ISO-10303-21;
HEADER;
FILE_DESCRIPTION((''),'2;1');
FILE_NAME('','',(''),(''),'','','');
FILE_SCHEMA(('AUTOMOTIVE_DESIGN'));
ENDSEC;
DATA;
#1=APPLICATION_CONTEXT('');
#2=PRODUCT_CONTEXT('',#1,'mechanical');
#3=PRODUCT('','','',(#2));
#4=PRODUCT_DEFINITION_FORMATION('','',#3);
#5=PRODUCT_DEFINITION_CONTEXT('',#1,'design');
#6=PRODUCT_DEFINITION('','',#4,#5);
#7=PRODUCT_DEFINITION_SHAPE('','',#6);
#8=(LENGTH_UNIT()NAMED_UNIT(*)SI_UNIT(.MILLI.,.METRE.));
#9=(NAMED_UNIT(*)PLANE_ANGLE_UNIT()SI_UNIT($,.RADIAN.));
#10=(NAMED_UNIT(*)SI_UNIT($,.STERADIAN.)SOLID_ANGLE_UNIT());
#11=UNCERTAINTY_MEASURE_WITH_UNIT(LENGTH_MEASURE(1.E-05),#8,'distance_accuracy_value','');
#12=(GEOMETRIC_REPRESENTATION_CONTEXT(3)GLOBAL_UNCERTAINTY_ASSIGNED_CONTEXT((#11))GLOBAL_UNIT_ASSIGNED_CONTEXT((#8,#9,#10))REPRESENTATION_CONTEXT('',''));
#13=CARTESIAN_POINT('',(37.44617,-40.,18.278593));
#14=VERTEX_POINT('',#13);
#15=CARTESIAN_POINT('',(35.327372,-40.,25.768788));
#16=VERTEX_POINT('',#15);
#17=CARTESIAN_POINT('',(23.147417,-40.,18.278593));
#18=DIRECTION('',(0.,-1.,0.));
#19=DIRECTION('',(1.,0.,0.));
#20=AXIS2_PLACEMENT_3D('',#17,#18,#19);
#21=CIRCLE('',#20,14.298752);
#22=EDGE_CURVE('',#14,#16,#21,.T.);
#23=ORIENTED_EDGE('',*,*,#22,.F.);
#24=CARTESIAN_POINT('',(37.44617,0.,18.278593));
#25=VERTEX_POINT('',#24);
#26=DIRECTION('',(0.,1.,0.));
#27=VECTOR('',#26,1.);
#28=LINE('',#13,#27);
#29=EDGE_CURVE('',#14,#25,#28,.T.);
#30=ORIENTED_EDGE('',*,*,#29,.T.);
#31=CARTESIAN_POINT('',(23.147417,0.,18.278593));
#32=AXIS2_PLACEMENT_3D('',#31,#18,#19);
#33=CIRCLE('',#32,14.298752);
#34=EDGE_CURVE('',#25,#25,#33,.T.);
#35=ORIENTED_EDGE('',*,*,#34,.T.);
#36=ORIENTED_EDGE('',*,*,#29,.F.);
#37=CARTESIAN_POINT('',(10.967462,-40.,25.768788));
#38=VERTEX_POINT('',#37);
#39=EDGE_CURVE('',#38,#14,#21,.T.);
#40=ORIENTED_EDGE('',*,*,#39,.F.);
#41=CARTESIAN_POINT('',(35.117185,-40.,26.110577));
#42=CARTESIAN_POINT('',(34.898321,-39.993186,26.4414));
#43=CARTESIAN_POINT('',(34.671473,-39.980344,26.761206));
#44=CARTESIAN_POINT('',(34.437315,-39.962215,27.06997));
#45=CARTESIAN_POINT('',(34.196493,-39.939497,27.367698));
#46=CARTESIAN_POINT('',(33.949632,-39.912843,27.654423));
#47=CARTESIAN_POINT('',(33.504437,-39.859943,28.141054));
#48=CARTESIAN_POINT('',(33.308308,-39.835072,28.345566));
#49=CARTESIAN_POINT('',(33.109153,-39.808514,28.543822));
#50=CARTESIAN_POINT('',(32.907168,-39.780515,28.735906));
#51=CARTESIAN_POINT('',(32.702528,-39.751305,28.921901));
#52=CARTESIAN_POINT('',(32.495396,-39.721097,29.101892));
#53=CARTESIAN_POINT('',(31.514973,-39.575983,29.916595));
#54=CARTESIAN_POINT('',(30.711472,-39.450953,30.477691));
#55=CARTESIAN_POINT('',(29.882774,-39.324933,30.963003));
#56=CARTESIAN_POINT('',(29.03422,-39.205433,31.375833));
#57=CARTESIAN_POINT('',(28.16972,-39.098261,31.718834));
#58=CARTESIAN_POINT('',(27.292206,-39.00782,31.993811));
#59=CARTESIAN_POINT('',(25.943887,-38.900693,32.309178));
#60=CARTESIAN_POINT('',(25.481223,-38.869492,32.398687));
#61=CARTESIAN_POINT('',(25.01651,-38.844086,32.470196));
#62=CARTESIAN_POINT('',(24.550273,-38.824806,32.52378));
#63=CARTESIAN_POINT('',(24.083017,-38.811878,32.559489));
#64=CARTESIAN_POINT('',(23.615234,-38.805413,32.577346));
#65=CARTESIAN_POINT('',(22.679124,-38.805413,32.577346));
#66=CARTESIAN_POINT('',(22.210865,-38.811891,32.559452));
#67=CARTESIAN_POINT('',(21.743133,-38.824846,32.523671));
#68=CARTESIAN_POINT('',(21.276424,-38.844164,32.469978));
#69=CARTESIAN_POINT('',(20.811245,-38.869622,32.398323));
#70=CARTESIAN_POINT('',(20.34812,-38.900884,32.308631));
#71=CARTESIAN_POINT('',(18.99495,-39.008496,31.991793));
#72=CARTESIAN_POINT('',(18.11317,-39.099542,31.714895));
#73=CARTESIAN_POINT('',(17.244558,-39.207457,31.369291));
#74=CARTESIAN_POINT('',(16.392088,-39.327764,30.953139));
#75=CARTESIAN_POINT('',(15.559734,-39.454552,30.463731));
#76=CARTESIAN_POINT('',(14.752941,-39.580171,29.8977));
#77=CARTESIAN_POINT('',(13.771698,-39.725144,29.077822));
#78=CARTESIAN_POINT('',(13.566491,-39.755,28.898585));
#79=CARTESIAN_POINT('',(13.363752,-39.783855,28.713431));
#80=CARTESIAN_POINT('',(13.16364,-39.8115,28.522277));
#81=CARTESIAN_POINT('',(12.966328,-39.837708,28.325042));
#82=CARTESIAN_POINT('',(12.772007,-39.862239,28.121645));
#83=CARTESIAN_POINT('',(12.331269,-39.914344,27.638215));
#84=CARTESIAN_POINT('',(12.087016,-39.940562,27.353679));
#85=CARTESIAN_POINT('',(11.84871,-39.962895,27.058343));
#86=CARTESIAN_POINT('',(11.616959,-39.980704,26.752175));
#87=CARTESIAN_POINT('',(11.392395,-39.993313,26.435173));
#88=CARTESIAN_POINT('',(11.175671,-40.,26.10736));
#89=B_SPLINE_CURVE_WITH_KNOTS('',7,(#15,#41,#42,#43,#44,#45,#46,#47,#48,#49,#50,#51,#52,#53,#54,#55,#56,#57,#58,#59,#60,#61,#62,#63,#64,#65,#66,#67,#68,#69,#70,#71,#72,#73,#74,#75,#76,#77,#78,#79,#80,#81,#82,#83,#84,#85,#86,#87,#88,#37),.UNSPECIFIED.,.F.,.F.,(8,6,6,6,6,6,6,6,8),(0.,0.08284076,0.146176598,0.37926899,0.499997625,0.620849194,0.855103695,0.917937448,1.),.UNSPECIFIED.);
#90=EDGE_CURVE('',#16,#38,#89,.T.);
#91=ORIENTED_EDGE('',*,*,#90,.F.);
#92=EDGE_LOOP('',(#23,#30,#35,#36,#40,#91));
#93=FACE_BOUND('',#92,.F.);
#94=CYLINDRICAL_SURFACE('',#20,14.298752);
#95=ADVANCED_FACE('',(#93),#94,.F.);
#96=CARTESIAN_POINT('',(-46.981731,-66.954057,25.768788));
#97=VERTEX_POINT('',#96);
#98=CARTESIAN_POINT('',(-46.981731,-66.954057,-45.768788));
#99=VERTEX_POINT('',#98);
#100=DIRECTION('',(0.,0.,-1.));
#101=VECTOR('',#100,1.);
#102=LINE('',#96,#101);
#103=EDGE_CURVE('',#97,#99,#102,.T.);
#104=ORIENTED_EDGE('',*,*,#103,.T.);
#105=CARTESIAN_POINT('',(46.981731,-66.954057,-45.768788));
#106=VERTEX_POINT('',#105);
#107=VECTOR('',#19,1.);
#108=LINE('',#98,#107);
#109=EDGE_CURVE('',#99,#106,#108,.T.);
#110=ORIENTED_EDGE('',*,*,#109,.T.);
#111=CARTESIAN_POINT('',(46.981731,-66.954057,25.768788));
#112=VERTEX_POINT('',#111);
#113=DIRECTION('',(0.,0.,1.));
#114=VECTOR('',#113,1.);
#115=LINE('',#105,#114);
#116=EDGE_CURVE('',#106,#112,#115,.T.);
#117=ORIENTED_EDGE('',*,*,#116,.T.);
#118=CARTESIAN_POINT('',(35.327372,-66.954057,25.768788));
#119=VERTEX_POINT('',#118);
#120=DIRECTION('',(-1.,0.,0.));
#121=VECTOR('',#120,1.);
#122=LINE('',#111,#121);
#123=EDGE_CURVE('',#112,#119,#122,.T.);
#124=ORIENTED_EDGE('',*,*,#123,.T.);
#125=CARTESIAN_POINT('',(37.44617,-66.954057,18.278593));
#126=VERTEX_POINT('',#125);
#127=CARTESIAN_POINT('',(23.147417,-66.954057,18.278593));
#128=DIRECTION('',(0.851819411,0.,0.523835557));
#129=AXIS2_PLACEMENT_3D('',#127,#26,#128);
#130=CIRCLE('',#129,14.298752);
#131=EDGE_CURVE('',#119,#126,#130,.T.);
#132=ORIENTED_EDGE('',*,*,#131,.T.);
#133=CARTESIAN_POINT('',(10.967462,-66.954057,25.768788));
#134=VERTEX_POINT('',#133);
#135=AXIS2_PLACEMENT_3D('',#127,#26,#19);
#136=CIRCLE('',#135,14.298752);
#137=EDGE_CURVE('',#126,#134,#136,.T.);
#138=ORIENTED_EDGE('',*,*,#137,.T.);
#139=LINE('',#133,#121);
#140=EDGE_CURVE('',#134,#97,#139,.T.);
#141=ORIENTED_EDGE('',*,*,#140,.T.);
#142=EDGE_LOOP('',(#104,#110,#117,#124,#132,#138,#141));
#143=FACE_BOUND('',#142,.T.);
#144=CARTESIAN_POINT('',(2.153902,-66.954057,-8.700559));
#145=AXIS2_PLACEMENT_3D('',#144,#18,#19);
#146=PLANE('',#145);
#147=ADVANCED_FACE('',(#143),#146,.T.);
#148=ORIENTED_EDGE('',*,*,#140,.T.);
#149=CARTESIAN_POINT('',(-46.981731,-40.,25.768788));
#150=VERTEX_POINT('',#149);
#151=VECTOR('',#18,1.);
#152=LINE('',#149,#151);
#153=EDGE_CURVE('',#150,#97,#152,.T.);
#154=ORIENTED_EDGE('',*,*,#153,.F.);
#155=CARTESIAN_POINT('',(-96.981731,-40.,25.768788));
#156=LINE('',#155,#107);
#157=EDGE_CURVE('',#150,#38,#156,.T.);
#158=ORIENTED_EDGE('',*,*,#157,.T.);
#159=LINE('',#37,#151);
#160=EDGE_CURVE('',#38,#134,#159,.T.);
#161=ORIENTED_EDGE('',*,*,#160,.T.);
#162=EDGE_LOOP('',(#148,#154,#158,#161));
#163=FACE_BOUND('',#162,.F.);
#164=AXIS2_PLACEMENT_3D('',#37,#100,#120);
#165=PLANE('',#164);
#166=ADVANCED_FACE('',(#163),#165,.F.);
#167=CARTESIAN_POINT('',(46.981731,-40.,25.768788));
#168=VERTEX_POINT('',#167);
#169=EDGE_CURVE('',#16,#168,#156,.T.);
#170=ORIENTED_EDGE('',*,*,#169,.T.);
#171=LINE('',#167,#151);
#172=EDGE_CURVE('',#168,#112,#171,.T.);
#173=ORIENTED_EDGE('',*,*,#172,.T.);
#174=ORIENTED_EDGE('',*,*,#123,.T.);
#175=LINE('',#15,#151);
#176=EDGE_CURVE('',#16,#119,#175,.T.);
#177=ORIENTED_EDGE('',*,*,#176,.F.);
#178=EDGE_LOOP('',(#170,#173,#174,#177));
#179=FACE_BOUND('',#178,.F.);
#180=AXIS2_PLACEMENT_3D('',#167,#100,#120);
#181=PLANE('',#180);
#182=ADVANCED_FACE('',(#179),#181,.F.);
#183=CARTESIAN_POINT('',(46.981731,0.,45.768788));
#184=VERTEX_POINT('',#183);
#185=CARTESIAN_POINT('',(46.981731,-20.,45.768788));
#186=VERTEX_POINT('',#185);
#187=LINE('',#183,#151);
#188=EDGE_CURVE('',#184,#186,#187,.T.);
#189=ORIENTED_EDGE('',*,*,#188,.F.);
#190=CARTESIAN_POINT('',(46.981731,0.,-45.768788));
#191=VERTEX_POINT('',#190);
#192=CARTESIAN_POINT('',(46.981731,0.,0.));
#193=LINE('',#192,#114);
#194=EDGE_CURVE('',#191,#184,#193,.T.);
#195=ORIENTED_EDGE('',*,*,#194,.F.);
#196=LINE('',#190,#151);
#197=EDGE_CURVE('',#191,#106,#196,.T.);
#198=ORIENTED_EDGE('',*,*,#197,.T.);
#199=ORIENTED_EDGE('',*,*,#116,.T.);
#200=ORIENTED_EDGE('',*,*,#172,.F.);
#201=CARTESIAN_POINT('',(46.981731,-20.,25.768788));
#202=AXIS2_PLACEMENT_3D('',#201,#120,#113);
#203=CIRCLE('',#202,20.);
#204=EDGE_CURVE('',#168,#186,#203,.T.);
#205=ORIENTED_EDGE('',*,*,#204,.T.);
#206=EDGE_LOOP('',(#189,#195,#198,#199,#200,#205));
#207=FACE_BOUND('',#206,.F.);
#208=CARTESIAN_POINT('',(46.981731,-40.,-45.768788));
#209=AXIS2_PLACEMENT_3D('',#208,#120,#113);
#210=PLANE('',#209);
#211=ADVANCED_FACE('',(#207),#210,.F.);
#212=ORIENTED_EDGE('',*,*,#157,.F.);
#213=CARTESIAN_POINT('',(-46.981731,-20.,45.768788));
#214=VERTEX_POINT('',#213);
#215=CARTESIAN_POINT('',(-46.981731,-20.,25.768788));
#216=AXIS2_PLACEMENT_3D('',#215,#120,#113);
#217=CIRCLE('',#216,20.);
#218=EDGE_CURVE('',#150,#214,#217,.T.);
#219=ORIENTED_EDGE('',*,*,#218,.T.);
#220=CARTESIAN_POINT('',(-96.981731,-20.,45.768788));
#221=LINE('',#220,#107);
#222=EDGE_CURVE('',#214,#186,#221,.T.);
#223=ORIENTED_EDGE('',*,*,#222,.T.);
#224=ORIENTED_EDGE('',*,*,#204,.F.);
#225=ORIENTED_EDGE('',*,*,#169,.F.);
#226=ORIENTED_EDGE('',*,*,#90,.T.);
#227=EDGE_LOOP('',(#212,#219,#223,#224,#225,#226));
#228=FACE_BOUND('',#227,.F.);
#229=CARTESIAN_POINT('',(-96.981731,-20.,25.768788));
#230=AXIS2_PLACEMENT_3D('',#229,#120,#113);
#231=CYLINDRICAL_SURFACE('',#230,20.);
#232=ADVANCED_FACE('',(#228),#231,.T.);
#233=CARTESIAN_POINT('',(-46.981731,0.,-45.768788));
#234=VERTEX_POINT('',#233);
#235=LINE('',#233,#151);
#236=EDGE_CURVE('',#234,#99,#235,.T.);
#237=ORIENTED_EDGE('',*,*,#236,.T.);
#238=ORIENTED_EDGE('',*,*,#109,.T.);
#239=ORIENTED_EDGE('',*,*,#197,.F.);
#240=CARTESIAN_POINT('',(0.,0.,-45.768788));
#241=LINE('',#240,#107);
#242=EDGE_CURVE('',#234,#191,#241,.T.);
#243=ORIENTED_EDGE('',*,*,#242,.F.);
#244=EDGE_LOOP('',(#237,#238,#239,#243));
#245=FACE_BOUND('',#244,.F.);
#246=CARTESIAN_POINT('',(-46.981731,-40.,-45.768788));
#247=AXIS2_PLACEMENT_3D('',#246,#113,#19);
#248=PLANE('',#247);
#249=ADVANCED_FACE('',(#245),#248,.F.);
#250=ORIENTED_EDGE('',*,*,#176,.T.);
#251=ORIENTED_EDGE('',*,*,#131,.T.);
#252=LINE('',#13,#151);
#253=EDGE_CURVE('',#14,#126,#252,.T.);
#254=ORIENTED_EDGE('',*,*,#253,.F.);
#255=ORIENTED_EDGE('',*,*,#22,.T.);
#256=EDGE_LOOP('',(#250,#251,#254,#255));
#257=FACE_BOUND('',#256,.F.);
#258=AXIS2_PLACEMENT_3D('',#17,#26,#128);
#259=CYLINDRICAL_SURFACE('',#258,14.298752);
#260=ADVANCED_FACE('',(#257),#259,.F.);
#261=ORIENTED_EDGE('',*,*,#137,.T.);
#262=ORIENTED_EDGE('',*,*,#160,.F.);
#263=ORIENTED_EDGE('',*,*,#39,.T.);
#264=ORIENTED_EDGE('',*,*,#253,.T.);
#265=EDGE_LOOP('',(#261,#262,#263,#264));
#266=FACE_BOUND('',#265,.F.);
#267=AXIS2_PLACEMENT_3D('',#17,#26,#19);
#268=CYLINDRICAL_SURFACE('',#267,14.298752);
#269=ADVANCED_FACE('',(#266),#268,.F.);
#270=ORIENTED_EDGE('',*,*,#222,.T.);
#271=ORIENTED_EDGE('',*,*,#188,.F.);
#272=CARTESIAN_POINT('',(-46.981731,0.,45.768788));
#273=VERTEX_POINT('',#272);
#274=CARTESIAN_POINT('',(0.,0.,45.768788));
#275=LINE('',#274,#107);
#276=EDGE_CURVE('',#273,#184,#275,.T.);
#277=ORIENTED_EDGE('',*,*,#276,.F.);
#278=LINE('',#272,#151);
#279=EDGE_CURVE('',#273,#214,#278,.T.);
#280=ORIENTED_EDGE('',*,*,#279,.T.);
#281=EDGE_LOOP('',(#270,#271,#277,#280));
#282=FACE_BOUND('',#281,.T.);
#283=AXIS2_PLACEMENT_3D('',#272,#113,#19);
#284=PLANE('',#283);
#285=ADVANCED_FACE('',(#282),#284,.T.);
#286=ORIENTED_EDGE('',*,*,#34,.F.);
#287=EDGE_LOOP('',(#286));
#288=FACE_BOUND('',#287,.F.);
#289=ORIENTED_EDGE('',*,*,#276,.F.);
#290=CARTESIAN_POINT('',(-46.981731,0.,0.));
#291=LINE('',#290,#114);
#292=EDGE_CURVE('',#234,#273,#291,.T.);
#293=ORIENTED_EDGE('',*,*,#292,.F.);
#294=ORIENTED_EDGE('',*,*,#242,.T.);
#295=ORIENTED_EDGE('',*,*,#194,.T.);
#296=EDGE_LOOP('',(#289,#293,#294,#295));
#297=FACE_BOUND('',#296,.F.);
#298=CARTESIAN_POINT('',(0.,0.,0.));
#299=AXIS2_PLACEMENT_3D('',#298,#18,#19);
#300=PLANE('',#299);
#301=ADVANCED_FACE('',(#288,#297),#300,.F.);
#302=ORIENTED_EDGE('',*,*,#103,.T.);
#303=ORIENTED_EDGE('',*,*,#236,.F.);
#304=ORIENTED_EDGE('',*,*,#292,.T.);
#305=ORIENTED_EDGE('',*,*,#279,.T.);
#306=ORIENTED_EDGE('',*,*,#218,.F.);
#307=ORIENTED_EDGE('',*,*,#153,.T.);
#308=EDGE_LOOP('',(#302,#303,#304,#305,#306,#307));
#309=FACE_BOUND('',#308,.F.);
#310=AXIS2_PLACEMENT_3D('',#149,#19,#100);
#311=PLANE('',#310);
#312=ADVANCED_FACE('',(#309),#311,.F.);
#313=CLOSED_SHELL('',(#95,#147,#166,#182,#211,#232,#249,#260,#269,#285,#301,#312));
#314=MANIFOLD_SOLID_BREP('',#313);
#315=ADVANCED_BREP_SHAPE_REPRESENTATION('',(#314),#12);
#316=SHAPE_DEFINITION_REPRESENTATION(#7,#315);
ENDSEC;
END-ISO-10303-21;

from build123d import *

# Parameters (mm, degrees)
F0_W        = 93.9634628594
F0_H        = 91.5375761688
F1_DEPTH    = 40
F2_R        = 14.2987523314
F3_DEPTH    = 64.5675584674
F4_T1_DEPTH = 193.9634628594
F6_DEPTH    = 26.9540566951


# Not quite as in the source:
# - a fillet or chamfer that OpenCascade refuses, or shapes differently, is made with other operations: its cross-section is extruded or revolved along the edge and cut away or added


with BuildPart() as f1:
    # F0 (on Front) → F1 (new body)
    with BuildSketch(Plane.XZ):
        Rectangle(F0_W, F0_H)
    extrude(amount=F1_DEPTH)

    # F2 (on face) → F3 (cut)
    with BuildSketch(Plane.XZ.offset(40)):
        with Locations((23.1474172324, 18.2785931975)):
            Circle(F2_R)
    extrude(amount=-F3_DEPTH, mode=Mode.SUBTRACT)

    # F4: fillet of radius 20 on 1 edges, made by hand

    # F4_s2 → F4_t1 (cut)
    with BuildSketch(Plane.YZ.offset(-96.9817314297)):
        with BuildLine():
            ThreePointArc((-20, 45.7687880844), (-34.1421356237, 39.9109237081), (-40, 25.7687880844))
            Line((-40, 25.7687880844), (-40, 45.7687880844))
            Line((-40, 45.7687880844), (-20, 45.7687880844))
        make_face()
    extrude(amount=F4_T1_DEPTH, mode=Mode.SUBTRACT)

    # F5 (on face) → F6 (join)
    with BuildSketch(Plane.XZ.offset(40)):
        with BuildLine():
            Line((-46.9817314297, 25.7687880844), (-46.9817314297, -45.7687880844))
            Line((-46.9817314297, -45.7687880844), (46.9817314297, -45.7687880844))
            Line((46.9817314297, -45.7687880844), (46.9817314297, 25.7687880844))
            Line((46.9817314297, 25.7687880844), (35.3273720267, 25.7687880844))
            ThreePointArc((35.3273720267, 25.7687880844), (36.9062775639, 22.1706467187), (37.4461695638, 18.2785931975))
            ThreePointArc((37.4461695638, 18.2785931975), (19.2553637112, 4.5197328659), (10.9674624381, 25.7687880844))
            Line((10.9674624381, 25.7687880844), (-46.9817314297, 25.7687880844))
        make_face()
    extrude(amount=F6_DEPTH)


solid = f1.part
